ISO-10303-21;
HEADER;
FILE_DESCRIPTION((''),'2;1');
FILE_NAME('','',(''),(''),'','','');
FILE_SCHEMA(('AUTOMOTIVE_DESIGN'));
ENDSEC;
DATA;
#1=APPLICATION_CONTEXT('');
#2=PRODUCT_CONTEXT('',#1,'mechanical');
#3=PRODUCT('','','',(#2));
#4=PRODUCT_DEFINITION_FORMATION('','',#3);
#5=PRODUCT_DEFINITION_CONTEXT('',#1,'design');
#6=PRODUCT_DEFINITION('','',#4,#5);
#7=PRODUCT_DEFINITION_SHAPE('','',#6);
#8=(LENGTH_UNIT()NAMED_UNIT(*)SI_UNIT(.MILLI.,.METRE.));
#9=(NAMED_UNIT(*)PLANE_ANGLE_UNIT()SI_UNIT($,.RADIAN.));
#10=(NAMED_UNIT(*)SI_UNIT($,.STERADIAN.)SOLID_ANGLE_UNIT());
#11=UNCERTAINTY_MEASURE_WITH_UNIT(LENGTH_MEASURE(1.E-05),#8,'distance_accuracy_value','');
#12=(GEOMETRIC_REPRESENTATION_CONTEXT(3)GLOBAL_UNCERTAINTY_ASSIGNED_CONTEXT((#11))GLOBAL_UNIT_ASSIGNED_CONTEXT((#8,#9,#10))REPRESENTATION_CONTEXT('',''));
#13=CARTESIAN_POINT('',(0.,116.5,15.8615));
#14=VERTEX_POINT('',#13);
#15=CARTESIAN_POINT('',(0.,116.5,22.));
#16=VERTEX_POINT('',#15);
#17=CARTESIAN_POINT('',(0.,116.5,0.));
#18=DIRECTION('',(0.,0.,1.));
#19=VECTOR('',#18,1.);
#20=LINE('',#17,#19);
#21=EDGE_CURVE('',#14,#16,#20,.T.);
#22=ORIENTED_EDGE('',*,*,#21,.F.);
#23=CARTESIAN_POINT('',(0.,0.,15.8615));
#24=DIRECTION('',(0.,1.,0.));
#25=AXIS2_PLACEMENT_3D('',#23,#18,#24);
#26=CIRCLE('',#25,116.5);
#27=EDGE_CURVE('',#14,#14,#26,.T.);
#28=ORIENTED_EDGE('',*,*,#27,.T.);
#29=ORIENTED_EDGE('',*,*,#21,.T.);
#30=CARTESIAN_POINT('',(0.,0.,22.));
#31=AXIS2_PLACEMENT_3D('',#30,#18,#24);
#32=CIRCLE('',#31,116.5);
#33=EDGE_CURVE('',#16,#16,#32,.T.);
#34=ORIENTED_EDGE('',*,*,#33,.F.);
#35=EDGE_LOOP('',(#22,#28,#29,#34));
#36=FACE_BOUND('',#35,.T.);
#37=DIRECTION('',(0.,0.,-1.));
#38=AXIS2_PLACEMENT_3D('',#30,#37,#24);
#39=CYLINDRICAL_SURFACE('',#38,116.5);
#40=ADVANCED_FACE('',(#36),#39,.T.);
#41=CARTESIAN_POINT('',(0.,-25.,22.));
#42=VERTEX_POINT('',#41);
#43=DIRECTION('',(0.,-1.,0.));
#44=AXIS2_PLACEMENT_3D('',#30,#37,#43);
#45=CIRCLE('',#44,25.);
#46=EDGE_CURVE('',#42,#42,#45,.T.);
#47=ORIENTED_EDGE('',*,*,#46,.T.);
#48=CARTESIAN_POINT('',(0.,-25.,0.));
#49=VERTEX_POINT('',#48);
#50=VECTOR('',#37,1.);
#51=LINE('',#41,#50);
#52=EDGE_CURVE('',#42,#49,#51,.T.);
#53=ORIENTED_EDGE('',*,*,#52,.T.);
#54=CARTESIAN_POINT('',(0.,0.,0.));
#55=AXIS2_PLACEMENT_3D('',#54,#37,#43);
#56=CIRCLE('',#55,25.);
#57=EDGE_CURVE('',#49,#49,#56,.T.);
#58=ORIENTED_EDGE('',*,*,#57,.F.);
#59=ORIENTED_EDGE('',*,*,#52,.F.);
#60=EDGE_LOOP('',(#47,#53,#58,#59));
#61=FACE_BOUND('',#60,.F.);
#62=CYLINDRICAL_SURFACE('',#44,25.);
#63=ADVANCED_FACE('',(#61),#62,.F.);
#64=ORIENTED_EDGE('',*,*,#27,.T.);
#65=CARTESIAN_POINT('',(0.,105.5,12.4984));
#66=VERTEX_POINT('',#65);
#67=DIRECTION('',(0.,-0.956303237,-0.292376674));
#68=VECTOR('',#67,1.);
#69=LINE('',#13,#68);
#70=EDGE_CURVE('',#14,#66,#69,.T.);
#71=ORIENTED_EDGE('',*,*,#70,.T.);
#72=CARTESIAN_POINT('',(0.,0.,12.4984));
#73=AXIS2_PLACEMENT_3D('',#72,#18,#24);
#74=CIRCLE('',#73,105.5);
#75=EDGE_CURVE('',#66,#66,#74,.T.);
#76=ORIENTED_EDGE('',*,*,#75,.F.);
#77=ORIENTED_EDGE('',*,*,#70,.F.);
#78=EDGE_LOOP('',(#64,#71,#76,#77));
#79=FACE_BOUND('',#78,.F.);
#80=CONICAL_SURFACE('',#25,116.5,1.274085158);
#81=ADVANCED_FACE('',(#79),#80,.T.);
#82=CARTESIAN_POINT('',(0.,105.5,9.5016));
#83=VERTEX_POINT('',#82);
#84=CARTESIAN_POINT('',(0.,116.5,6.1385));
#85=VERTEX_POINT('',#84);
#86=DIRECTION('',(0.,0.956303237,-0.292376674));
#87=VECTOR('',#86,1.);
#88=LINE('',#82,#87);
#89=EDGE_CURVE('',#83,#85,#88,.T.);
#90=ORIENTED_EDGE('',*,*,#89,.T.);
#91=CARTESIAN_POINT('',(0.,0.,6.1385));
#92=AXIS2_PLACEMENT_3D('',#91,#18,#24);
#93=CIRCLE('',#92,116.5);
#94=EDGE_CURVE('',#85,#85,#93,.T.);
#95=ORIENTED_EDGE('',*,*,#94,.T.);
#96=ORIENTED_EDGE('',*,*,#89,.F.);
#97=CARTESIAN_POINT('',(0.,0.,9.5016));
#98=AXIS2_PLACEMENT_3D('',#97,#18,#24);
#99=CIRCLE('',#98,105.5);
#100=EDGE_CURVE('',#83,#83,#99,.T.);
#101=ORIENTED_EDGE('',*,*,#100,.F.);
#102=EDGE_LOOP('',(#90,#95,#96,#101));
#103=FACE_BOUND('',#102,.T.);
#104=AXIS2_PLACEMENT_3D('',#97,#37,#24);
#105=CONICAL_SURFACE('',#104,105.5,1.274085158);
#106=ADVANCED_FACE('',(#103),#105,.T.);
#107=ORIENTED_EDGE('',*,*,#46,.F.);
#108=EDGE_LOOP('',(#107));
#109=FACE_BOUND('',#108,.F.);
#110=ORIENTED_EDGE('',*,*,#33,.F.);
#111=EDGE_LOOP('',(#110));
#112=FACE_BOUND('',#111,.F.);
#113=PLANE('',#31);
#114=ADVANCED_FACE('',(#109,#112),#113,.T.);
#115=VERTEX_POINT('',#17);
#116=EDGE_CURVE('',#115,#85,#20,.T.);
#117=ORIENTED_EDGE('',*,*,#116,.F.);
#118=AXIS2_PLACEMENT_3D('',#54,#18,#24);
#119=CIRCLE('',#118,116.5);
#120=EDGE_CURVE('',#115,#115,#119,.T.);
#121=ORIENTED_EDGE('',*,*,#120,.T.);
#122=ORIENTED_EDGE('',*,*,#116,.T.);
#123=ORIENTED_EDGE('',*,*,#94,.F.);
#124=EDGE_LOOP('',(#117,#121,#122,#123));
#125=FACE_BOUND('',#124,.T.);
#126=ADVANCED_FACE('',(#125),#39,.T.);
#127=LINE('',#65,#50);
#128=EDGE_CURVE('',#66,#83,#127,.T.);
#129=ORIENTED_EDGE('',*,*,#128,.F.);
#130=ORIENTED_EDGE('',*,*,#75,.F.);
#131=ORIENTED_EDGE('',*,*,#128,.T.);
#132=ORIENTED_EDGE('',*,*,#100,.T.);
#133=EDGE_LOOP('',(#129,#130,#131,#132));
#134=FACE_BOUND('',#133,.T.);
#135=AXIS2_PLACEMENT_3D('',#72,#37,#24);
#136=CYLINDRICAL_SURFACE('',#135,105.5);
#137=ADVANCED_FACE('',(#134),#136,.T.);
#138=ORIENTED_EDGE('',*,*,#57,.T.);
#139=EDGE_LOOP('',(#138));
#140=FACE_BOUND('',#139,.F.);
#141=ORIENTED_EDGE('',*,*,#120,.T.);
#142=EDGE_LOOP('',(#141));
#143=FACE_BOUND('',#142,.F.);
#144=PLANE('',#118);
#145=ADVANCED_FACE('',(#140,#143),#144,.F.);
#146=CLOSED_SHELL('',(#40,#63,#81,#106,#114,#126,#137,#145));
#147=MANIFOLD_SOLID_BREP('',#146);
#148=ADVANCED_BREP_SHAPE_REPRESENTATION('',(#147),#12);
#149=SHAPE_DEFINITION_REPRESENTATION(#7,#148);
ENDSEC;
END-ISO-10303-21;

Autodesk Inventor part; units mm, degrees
ref_plane "YZ Plane" through (0, 0, 0) normal (1, 0, 0) x (0, 1, 0)
ref_plane "XZ Plane" through (0, 0, 0) normal (0, 1, 0) x (-1, 0, 0)
sketch "Esquisse principale" plane through (0, 0, 0) normal (1, 0, 0) x (0, 1, 0)
  line L0 (0, 22) -> (116.5, 22)
  line L1 (116.5, 22) -> (116.5, 15.8615)
  line L2 (116.5, 15.8615) -> (105.5, 12.4984)
  line L3 (105.5, 12.4984) -> (105.5, 9.5016)
  line L4 (105.5, 9.5016) -> (116.5, 6.1385)
  line L5 (116.5, 6.1385) -> (116.5, 0)
  line L6 (116.5, 0) -> (0, 0)
  line L7 (114.5, 15.25) -> (114.5, 6.75) construction
  line L8 (105.5, 11) -> (114.5, 11) construction
  line L9 (116.5, 15.8615) -> (116.5, 6.1385)
  line L10 (0, -3.2) -> (0, 19.2) projected
  line L11 (0, 0) -> (0, 22)
  dimension "d0" = 8.5
  dimension "d1" = 34
  dimension "d2" = 2
  dimension "d6" = 22
  dimension "d21" = 229
  dimension "d25" = 11
  dimension "d27" = 11
ref_plane "Plan de courroie" through (0, 105.5, 11) normal (0, 0, 1) x (1, 0, 0)
revolve "Corps" add sketch "Esquisse principale" angle 360 about axis through (0, 0, -10) along (0, 0, 1)
revolve "Bord" cut sketch "Esquisse principale" angle 360 about axis through (0, 0, -10) along (0, 0, 1) contours L9 L4 L3 L2
fillet "Congé externe" [suppressed]
fillet "Congé interne" [suppressed]
pattern_of_one "Réseau de bords"
sketch "Esquisse2" plane through (0, 0, 22) normal (0, 0, 1) x (1, 0, 0)
  circle A0 centre (0, 0) radius 116.5 projected
hole "Perçage1" at (0, 0, 22) direction (0, 0, -1) diameter 50 depth 22
equation "\"d0\" = da_Bw"
equation "\"d1\" = da_Alfa"
equation "\"d2\" = da_c"
equation "\"d21\" = da_Dw"
equation "\"d25\" = da_Hd"
equation "\"d27\" = da_Se"
equation "\"da_r1\" = 0"
equation "\"da_r2\" = 0"
equation "\"d18\" = da_Sg"
equation "\"d5\" = da_Se"
equation "\"da_Bw\" = 8.5"
equation "\"da_Alfa\" = 34deg"
equation "\"da_c\" = 2"
equation "\"da_Dw\" = 229"
equation "\"da_Hd\" = 11"
equation "\"da_Se\" = 11"
equation "\"da_Sg\" = 12"
properties part number "Poulie à gorge1" material "Steel"
